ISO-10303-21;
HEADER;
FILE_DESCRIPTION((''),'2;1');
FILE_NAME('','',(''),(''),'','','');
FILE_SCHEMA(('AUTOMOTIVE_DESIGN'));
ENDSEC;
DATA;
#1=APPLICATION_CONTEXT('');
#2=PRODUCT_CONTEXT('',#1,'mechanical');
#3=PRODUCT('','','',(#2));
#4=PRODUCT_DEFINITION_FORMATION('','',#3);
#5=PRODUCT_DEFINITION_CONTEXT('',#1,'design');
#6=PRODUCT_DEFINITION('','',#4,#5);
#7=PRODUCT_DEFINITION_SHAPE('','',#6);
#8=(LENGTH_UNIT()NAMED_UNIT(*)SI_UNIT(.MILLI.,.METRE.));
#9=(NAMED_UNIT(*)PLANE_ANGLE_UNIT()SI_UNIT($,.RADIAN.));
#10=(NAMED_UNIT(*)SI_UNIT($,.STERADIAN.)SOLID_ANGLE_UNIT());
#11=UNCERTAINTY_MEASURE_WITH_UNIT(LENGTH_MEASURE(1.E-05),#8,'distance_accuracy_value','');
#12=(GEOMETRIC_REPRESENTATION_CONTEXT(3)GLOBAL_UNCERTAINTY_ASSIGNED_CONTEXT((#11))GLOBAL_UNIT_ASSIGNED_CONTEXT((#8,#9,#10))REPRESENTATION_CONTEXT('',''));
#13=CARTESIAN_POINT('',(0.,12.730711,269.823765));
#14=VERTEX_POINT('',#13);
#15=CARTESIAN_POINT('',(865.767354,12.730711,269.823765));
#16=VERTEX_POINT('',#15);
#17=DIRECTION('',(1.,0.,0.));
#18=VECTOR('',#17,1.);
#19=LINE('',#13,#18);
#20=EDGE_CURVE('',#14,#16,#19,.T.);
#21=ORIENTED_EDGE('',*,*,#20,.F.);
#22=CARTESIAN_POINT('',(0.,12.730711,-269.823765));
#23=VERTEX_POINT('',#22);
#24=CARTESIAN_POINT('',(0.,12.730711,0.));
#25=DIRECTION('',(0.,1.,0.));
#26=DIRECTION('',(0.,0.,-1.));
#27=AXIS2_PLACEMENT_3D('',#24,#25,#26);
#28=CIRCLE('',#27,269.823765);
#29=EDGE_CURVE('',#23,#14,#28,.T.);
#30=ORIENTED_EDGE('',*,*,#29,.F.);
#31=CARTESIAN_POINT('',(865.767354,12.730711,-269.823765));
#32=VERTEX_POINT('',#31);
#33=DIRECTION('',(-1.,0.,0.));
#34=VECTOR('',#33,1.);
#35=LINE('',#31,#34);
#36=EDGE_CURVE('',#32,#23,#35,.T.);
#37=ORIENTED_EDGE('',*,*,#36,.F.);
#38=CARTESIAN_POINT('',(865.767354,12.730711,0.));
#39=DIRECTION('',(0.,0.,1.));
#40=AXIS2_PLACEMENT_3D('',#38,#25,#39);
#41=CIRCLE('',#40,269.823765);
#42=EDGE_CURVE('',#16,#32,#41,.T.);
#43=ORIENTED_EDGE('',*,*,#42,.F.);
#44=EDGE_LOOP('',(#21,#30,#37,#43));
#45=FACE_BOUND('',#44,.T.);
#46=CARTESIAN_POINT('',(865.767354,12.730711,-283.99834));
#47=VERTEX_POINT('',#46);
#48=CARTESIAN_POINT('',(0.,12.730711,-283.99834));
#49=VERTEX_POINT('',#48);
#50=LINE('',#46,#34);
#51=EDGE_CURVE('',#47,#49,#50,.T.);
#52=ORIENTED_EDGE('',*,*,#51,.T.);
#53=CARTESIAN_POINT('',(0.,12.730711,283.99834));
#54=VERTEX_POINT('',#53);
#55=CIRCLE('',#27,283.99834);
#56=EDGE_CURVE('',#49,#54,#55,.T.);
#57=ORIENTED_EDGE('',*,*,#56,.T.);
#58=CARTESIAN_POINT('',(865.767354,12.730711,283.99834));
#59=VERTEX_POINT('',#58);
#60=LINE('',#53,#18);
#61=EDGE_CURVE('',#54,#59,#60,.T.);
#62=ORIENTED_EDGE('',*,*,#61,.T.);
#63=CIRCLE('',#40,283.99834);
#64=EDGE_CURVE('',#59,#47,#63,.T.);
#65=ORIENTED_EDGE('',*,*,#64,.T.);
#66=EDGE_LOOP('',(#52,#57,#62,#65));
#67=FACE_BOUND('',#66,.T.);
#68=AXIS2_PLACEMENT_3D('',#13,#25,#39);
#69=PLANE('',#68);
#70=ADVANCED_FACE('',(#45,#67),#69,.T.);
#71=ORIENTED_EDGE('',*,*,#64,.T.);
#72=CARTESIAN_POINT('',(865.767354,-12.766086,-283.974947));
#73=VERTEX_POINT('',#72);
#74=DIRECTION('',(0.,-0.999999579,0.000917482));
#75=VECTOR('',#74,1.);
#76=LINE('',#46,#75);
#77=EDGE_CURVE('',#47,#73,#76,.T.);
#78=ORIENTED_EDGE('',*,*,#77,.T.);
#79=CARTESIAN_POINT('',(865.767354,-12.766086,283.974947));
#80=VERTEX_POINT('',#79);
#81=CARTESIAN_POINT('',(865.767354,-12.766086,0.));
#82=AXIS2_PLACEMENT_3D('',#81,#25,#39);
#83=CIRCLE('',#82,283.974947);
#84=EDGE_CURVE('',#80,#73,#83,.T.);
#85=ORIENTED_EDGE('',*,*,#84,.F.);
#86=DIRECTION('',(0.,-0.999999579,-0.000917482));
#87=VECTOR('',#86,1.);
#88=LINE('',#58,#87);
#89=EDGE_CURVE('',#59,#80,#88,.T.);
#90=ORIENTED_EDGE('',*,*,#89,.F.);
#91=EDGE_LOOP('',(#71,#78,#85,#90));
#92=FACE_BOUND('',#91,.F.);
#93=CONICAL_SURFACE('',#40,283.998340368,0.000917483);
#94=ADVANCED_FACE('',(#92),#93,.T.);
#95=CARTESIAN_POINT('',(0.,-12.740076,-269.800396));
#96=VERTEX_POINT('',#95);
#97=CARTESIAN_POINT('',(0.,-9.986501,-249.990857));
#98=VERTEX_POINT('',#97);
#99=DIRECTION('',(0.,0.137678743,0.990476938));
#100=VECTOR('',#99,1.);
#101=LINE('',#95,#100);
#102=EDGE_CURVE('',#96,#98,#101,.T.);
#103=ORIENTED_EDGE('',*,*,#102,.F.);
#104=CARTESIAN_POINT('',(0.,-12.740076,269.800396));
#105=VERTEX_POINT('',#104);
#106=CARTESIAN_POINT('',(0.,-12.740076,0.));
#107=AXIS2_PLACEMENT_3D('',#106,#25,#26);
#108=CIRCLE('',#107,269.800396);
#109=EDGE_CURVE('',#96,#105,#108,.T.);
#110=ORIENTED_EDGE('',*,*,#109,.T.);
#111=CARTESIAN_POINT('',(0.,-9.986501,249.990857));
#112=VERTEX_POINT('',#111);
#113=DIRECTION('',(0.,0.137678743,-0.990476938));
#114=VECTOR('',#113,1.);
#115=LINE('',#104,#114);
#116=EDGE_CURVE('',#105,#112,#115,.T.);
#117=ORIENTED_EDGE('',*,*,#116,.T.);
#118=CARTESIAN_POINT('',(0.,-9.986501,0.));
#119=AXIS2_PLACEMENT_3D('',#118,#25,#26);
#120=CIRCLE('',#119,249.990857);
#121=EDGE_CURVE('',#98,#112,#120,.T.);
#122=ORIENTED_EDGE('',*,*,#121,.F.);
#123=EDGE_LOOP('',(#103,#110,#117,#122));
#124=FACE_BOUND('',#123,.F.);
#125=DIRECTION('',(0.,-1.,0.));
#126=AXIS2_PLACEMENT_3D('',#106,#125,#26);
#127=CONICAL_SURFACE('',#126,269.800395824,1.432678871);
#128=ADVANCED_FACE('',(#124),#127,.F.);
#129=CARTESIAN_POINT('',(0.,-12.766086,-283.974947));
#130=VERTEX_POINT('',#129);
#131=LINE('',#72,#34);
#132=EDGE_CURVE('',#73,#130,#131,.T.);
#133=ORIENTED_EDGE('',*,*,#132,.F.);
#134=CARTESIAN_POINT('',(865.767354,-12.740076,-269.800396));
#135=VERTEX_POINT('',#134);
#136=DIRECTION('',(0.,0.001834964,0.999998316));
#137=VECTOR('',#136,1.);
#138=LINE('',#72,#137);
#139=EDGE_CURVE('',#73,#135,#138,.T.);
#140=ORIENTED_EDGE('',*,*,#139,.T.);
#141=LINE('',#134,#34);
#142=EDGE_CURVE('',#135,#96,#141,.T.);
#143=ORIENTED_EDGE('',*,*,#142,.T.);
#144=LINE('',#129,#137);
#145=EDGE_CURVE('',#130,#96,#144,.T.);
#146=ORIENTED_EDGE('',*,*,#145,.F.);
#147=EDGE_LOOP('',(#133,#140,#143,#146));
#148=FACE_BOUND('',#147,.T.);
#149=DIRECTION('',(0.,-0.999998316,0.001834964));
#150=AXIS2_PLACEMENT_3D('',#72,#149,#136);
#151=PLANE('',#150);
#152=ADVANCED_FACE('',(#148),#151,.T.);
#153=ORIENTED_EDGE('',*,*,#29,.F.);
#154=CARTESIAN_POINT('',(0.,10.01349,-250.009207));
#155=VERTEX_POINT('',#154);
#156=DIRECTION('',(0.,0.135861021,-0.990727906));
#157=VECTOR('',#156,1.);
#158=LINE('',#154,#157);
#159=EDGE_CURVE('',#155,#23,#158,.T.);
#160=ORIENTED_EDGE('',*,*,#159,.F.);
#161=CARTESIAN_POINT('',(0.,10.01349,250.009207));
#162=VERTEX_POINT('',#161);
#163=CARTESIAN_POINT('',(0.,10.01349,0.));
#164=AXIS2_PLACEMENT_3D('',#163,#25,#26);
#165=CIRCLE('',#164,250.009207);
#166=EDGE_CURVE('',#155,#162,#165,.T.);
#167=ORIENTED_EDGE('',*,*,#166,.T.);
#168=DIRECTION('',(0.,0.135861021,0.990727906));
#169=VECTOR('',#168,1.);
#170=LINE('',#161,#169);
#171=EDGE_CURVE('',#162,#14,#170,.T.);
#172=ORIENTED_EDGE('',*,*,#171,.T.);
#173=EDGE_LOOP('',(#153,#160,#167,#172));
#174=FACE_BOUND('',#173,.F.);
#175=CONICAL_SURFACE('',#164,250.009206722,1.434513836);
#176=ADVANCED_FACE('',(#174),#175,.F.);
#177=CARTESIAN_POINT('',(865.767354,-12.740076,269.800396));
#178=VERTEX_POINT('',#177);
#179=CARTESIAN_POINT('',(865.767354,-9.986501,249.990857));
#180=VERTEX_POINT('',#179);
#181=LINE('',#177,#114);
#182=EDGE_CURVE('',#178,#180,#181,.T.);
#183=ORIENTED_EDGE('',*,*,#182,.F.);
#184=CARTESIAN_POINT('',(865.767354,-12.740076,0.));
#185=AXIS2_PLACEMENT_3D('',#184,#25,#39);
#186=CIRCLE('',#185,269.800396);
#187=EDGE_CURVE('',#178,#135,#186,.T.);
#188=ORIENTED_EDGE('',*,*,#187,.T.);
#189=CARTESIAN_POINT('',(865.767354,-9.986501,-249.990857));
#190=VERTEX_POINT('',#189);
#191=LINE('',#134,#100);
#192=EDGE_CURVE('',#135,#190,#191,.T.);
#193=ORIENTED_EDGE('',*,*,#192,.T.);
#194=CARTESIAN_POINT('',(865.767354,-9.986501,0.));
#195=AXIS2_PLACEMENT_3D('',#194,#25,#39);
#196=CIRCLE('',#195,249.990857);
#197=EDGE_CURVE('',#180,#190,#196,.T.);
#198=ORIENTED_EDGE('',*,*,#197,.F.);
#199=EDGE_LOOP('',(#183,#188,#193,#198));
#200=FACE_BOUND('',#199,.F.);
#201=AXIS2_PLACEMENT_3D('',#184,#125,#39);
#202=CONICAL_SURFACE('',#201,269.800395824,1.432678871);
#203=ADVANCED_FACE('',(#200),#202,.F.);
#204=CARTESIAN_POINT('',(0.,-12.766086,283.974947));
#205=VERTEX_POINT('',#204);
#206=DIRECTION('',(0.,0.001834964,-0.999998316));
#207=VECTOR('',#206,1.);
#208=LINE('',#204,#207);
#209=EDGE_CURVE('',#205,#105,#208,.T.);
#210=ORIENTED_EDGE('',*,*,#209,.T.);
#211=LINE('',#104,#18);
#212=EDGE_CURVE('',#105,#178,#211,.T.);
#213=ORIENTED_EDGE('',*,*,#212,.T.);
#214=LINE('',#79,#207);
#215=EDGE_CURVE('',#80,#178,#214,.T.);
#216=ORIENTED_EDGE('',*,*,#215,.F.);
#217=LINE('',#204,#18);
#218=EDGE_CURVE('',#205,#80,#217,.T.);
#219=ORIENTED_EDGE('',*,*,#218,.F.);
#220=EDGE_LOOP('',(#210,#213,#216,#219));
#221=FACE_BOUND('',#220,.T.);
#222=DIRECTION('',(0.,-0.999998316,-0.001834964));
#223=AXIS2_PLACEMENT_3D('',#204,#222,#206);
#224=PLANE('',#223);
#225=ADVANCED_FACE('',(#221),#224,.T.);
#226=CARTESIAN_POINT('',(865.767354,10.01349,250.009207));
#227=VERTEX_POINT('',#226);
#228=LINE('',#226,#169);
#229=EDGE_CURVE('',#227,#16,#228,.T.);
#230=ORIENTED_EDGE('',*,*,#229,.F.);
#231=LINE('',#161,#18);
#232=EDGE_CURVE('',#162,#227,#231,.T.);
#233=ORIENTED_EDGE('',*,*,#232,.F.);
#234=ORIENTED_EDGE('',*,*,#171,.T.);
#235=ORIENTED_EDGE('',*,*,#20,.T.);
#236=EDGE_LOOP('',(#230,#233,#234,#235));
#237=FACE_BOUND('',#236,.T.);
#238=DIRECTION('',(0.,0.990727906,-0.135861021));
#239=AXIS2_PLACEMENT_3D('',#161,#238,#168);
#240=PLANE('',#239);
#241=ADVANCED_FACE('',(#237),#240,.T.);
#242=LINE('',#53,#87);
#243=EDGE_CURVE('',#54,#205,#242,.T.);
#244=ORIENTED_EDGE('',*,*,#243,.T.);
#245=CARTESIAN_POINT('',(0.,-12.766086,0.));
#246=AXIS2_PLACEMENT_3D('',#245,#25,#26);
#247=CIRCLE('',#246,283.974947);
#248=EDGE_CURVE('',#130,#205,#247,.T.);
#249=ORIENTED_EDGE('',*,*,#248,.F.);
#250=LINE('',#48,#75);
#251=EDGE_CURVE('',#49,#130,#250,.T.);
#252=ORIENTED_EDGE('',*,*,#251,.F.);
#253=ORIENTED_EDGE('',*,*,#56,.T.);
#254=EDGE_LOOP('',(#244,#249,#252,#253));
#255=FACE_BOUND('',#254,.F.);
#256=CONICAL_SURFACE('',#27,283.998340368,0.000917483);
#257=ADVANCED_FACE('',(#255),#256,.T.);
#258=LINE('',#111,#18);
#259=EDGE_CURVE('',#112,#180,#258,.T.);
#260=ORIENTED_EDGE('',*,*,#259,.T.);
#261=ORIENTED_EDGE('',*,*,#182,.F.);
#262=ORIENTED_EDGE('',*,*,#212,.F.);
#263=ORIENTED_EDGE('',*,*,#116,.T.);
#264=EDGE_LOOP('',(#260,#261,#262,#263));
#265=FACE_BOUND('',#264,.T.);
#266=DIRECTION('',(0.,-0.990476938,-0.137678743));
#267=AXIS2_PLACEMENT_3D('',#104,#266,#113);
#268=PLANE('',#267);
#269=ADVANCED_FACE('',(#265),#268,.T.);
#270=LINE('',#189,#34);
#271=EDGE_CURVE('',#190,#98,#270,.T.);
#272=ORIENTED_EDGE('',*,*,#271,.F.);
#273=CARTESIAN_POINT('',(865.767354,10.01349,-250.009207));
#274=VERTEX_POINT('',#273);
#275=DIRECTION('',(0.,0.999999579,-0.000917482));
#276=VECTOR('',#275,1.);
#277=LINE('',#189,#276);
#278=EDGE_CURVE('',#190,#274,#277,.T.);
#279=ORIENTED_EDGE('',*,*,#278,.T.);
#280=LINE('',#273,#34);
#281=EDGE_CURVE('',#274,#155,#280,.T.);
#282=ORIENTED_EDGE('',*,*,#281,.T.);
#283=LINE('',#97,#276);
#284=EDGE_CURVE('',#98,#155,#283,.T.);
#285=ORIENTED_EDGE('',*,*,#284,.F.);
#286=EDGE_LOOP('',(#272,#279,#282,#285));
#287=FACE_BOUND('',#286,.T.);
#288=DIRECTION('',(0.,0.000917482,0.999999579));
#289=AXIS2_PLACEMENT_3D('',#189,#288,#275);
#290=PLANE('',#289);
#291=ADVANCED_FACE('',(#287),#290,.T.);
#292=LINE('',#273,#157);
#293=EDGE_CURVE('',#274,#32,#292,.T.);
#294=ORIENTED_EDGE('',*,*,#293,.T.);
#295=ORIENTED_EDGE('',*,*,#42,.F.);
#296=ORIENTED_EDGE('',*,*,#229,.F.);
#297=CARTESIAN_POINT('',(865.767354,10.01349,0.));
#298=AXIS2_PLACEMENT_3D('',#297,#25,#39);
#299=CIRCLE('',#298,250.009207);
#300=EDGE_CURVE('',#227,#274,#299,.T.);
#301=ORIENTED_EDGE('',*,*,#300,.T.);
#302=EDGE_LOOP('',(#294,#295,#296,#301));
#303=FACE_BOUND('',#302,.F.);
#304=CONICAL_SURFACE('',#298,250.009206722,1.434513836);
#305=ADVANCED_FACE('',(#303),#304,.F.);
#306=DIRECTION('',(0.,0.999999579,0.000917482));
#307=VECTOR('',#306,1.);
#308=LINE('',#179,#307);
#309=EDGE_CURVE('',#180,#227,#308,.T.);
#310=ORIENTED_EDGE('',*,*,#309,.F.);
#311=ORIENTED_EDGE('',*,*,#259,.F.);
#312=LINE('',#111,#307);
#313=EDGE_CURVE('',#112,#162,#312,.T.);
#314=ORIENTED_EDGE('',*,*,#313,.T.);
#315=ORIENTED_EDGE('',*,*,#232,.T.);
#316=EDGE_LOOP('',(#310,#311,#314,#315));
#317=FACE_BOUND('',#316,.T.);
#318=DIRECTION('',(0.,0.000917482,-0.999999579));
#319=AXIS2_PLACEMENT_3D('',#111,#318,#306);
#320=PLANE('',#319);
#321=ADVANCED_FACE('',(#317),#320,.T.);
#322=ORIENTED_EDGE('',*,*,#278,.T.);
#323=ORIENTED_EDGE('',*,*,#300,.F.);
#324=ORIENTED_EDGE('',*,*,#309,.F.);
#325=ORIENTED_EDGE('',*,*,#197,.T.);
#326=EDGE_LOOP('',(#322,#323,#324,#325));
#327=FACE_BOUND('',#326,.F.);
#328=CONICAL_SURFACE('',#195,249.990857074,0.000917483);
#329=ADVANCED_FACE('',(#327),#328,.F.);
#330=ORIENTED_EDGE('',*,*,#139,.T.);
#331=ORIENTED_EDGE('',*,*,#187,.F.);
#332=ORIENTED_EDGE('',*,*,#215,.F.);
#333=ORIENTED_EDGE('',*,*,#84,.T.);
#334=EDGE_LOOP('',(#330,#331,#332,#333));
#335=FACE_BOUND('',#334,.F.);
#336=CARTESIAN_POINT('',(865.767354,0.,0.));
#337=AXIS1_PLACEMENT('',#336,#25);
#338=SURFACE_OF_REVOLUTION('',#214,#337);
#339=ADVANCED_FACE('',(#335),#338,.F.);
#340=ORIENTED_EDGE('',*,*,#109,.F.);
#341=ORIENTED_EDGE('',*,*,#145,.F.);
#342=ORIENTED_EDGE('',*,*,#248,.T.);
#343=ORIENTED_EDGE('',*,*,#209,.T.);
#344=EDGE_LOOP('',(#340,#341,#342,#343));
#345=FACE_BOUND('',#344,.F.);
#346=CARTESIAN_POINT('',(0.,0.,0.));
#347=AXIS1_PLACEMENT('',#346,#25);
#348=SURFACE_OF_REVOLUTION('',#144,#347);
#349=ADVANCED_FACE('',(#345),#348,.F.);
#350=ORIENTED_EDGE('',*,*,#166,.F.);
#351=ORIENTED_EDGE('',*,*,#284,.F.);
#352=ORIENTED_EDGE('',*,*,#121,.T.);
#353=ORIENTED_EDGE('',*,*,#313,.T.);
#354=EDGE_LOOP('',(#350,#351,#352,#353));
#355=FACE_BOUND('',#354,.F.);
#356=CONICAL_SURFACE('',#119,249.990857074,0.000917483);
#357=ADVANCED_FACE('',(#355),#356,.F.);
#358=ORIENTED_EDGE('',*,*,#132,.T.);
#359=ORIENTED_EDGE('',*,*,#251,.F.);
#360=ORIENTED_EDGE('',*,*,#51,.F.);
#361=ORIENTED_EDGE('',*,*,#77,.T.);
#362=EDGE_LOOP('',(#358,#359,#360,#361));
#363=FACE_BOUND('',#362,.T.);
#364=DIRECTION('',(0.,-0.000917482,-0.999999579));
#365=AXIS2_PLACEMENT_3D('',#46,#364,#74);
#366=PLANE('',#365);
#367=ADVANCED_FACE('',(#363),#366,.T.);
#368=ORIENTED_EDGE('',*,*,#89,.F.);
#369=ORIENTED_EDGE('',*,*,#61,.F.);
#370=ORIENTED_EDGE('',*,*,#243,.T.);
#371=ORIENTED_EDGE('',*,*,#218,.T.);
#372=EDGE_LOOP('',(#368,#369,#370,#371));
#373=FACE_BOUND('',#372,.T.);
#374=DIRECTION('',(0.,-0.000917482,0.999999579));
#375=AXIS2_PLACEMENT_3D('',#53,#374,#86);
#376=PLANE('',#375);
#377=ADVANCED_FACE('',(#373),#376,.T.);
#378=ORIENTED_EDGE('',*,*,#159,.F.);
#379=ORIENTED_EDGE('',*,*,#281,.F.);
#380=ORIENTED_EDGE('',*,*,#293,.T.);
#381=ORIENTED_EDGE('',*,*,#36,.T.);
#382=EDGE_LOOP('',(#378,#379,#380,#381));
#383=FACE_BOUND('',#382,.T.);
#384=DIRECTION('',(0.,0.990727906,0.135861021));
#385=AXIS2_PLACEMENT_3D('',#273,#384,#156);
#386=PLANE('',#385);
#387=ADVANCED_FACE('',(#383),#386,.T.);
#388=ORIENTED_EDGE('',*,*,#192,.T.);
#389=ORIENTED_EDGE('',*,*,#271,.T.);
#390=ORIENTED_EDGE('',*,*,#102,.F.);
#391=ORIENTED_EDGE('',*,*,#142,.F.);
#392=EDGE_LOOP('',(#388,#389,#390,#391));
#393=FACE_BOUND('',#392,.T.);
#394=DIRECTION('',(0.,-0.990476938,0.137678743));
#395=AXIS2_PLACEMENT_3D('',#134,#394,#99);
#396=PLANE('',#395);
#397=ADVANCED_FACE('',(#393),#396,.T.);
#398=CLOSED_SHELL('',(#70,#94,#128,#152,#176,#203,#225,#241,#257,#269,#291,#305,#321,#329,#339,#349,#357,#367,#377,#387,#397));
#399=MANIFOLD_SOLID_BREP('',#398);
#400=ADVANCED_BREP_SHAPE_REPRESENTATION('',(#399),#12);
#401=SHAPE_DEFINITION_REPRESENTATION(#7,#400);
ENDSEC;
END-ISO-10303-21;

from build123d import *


with BuildPart() as f2:
    # F2: sweep along a path in F1
    with BuildLine(Plane.XZ) as f2_path:
        Line((0, 266.9991701841), (865.7673536606, 266.9991701841))
        ThreePointArc((865.7673536606, 266.9991701841), (1132.7665238447, 0), (865.7673536606, -266.9991701841))
        Line((865.7673536606, -266.9991701841), (0, -266.9991701841))
        ThreePointArc((0, -266.9991701841), (-266.9991701841, 0), (0, 266.9991701841))
    # F0 (on Right) → F2 (sweep)
    with BuildSketch(Plane.YZ):
        Polygon((10.0134903274, 250.0092067223), (12.7307107569, 269.8237648334), (12.7307107569, 283.9983403683), (-12.7660859497, 283.9749474953), (-12.7400761126, 269.800395824), (-9.9865012549, 249.9908570736), align=None)
    sweep(path=f2_path.line)


solid = f2.part
